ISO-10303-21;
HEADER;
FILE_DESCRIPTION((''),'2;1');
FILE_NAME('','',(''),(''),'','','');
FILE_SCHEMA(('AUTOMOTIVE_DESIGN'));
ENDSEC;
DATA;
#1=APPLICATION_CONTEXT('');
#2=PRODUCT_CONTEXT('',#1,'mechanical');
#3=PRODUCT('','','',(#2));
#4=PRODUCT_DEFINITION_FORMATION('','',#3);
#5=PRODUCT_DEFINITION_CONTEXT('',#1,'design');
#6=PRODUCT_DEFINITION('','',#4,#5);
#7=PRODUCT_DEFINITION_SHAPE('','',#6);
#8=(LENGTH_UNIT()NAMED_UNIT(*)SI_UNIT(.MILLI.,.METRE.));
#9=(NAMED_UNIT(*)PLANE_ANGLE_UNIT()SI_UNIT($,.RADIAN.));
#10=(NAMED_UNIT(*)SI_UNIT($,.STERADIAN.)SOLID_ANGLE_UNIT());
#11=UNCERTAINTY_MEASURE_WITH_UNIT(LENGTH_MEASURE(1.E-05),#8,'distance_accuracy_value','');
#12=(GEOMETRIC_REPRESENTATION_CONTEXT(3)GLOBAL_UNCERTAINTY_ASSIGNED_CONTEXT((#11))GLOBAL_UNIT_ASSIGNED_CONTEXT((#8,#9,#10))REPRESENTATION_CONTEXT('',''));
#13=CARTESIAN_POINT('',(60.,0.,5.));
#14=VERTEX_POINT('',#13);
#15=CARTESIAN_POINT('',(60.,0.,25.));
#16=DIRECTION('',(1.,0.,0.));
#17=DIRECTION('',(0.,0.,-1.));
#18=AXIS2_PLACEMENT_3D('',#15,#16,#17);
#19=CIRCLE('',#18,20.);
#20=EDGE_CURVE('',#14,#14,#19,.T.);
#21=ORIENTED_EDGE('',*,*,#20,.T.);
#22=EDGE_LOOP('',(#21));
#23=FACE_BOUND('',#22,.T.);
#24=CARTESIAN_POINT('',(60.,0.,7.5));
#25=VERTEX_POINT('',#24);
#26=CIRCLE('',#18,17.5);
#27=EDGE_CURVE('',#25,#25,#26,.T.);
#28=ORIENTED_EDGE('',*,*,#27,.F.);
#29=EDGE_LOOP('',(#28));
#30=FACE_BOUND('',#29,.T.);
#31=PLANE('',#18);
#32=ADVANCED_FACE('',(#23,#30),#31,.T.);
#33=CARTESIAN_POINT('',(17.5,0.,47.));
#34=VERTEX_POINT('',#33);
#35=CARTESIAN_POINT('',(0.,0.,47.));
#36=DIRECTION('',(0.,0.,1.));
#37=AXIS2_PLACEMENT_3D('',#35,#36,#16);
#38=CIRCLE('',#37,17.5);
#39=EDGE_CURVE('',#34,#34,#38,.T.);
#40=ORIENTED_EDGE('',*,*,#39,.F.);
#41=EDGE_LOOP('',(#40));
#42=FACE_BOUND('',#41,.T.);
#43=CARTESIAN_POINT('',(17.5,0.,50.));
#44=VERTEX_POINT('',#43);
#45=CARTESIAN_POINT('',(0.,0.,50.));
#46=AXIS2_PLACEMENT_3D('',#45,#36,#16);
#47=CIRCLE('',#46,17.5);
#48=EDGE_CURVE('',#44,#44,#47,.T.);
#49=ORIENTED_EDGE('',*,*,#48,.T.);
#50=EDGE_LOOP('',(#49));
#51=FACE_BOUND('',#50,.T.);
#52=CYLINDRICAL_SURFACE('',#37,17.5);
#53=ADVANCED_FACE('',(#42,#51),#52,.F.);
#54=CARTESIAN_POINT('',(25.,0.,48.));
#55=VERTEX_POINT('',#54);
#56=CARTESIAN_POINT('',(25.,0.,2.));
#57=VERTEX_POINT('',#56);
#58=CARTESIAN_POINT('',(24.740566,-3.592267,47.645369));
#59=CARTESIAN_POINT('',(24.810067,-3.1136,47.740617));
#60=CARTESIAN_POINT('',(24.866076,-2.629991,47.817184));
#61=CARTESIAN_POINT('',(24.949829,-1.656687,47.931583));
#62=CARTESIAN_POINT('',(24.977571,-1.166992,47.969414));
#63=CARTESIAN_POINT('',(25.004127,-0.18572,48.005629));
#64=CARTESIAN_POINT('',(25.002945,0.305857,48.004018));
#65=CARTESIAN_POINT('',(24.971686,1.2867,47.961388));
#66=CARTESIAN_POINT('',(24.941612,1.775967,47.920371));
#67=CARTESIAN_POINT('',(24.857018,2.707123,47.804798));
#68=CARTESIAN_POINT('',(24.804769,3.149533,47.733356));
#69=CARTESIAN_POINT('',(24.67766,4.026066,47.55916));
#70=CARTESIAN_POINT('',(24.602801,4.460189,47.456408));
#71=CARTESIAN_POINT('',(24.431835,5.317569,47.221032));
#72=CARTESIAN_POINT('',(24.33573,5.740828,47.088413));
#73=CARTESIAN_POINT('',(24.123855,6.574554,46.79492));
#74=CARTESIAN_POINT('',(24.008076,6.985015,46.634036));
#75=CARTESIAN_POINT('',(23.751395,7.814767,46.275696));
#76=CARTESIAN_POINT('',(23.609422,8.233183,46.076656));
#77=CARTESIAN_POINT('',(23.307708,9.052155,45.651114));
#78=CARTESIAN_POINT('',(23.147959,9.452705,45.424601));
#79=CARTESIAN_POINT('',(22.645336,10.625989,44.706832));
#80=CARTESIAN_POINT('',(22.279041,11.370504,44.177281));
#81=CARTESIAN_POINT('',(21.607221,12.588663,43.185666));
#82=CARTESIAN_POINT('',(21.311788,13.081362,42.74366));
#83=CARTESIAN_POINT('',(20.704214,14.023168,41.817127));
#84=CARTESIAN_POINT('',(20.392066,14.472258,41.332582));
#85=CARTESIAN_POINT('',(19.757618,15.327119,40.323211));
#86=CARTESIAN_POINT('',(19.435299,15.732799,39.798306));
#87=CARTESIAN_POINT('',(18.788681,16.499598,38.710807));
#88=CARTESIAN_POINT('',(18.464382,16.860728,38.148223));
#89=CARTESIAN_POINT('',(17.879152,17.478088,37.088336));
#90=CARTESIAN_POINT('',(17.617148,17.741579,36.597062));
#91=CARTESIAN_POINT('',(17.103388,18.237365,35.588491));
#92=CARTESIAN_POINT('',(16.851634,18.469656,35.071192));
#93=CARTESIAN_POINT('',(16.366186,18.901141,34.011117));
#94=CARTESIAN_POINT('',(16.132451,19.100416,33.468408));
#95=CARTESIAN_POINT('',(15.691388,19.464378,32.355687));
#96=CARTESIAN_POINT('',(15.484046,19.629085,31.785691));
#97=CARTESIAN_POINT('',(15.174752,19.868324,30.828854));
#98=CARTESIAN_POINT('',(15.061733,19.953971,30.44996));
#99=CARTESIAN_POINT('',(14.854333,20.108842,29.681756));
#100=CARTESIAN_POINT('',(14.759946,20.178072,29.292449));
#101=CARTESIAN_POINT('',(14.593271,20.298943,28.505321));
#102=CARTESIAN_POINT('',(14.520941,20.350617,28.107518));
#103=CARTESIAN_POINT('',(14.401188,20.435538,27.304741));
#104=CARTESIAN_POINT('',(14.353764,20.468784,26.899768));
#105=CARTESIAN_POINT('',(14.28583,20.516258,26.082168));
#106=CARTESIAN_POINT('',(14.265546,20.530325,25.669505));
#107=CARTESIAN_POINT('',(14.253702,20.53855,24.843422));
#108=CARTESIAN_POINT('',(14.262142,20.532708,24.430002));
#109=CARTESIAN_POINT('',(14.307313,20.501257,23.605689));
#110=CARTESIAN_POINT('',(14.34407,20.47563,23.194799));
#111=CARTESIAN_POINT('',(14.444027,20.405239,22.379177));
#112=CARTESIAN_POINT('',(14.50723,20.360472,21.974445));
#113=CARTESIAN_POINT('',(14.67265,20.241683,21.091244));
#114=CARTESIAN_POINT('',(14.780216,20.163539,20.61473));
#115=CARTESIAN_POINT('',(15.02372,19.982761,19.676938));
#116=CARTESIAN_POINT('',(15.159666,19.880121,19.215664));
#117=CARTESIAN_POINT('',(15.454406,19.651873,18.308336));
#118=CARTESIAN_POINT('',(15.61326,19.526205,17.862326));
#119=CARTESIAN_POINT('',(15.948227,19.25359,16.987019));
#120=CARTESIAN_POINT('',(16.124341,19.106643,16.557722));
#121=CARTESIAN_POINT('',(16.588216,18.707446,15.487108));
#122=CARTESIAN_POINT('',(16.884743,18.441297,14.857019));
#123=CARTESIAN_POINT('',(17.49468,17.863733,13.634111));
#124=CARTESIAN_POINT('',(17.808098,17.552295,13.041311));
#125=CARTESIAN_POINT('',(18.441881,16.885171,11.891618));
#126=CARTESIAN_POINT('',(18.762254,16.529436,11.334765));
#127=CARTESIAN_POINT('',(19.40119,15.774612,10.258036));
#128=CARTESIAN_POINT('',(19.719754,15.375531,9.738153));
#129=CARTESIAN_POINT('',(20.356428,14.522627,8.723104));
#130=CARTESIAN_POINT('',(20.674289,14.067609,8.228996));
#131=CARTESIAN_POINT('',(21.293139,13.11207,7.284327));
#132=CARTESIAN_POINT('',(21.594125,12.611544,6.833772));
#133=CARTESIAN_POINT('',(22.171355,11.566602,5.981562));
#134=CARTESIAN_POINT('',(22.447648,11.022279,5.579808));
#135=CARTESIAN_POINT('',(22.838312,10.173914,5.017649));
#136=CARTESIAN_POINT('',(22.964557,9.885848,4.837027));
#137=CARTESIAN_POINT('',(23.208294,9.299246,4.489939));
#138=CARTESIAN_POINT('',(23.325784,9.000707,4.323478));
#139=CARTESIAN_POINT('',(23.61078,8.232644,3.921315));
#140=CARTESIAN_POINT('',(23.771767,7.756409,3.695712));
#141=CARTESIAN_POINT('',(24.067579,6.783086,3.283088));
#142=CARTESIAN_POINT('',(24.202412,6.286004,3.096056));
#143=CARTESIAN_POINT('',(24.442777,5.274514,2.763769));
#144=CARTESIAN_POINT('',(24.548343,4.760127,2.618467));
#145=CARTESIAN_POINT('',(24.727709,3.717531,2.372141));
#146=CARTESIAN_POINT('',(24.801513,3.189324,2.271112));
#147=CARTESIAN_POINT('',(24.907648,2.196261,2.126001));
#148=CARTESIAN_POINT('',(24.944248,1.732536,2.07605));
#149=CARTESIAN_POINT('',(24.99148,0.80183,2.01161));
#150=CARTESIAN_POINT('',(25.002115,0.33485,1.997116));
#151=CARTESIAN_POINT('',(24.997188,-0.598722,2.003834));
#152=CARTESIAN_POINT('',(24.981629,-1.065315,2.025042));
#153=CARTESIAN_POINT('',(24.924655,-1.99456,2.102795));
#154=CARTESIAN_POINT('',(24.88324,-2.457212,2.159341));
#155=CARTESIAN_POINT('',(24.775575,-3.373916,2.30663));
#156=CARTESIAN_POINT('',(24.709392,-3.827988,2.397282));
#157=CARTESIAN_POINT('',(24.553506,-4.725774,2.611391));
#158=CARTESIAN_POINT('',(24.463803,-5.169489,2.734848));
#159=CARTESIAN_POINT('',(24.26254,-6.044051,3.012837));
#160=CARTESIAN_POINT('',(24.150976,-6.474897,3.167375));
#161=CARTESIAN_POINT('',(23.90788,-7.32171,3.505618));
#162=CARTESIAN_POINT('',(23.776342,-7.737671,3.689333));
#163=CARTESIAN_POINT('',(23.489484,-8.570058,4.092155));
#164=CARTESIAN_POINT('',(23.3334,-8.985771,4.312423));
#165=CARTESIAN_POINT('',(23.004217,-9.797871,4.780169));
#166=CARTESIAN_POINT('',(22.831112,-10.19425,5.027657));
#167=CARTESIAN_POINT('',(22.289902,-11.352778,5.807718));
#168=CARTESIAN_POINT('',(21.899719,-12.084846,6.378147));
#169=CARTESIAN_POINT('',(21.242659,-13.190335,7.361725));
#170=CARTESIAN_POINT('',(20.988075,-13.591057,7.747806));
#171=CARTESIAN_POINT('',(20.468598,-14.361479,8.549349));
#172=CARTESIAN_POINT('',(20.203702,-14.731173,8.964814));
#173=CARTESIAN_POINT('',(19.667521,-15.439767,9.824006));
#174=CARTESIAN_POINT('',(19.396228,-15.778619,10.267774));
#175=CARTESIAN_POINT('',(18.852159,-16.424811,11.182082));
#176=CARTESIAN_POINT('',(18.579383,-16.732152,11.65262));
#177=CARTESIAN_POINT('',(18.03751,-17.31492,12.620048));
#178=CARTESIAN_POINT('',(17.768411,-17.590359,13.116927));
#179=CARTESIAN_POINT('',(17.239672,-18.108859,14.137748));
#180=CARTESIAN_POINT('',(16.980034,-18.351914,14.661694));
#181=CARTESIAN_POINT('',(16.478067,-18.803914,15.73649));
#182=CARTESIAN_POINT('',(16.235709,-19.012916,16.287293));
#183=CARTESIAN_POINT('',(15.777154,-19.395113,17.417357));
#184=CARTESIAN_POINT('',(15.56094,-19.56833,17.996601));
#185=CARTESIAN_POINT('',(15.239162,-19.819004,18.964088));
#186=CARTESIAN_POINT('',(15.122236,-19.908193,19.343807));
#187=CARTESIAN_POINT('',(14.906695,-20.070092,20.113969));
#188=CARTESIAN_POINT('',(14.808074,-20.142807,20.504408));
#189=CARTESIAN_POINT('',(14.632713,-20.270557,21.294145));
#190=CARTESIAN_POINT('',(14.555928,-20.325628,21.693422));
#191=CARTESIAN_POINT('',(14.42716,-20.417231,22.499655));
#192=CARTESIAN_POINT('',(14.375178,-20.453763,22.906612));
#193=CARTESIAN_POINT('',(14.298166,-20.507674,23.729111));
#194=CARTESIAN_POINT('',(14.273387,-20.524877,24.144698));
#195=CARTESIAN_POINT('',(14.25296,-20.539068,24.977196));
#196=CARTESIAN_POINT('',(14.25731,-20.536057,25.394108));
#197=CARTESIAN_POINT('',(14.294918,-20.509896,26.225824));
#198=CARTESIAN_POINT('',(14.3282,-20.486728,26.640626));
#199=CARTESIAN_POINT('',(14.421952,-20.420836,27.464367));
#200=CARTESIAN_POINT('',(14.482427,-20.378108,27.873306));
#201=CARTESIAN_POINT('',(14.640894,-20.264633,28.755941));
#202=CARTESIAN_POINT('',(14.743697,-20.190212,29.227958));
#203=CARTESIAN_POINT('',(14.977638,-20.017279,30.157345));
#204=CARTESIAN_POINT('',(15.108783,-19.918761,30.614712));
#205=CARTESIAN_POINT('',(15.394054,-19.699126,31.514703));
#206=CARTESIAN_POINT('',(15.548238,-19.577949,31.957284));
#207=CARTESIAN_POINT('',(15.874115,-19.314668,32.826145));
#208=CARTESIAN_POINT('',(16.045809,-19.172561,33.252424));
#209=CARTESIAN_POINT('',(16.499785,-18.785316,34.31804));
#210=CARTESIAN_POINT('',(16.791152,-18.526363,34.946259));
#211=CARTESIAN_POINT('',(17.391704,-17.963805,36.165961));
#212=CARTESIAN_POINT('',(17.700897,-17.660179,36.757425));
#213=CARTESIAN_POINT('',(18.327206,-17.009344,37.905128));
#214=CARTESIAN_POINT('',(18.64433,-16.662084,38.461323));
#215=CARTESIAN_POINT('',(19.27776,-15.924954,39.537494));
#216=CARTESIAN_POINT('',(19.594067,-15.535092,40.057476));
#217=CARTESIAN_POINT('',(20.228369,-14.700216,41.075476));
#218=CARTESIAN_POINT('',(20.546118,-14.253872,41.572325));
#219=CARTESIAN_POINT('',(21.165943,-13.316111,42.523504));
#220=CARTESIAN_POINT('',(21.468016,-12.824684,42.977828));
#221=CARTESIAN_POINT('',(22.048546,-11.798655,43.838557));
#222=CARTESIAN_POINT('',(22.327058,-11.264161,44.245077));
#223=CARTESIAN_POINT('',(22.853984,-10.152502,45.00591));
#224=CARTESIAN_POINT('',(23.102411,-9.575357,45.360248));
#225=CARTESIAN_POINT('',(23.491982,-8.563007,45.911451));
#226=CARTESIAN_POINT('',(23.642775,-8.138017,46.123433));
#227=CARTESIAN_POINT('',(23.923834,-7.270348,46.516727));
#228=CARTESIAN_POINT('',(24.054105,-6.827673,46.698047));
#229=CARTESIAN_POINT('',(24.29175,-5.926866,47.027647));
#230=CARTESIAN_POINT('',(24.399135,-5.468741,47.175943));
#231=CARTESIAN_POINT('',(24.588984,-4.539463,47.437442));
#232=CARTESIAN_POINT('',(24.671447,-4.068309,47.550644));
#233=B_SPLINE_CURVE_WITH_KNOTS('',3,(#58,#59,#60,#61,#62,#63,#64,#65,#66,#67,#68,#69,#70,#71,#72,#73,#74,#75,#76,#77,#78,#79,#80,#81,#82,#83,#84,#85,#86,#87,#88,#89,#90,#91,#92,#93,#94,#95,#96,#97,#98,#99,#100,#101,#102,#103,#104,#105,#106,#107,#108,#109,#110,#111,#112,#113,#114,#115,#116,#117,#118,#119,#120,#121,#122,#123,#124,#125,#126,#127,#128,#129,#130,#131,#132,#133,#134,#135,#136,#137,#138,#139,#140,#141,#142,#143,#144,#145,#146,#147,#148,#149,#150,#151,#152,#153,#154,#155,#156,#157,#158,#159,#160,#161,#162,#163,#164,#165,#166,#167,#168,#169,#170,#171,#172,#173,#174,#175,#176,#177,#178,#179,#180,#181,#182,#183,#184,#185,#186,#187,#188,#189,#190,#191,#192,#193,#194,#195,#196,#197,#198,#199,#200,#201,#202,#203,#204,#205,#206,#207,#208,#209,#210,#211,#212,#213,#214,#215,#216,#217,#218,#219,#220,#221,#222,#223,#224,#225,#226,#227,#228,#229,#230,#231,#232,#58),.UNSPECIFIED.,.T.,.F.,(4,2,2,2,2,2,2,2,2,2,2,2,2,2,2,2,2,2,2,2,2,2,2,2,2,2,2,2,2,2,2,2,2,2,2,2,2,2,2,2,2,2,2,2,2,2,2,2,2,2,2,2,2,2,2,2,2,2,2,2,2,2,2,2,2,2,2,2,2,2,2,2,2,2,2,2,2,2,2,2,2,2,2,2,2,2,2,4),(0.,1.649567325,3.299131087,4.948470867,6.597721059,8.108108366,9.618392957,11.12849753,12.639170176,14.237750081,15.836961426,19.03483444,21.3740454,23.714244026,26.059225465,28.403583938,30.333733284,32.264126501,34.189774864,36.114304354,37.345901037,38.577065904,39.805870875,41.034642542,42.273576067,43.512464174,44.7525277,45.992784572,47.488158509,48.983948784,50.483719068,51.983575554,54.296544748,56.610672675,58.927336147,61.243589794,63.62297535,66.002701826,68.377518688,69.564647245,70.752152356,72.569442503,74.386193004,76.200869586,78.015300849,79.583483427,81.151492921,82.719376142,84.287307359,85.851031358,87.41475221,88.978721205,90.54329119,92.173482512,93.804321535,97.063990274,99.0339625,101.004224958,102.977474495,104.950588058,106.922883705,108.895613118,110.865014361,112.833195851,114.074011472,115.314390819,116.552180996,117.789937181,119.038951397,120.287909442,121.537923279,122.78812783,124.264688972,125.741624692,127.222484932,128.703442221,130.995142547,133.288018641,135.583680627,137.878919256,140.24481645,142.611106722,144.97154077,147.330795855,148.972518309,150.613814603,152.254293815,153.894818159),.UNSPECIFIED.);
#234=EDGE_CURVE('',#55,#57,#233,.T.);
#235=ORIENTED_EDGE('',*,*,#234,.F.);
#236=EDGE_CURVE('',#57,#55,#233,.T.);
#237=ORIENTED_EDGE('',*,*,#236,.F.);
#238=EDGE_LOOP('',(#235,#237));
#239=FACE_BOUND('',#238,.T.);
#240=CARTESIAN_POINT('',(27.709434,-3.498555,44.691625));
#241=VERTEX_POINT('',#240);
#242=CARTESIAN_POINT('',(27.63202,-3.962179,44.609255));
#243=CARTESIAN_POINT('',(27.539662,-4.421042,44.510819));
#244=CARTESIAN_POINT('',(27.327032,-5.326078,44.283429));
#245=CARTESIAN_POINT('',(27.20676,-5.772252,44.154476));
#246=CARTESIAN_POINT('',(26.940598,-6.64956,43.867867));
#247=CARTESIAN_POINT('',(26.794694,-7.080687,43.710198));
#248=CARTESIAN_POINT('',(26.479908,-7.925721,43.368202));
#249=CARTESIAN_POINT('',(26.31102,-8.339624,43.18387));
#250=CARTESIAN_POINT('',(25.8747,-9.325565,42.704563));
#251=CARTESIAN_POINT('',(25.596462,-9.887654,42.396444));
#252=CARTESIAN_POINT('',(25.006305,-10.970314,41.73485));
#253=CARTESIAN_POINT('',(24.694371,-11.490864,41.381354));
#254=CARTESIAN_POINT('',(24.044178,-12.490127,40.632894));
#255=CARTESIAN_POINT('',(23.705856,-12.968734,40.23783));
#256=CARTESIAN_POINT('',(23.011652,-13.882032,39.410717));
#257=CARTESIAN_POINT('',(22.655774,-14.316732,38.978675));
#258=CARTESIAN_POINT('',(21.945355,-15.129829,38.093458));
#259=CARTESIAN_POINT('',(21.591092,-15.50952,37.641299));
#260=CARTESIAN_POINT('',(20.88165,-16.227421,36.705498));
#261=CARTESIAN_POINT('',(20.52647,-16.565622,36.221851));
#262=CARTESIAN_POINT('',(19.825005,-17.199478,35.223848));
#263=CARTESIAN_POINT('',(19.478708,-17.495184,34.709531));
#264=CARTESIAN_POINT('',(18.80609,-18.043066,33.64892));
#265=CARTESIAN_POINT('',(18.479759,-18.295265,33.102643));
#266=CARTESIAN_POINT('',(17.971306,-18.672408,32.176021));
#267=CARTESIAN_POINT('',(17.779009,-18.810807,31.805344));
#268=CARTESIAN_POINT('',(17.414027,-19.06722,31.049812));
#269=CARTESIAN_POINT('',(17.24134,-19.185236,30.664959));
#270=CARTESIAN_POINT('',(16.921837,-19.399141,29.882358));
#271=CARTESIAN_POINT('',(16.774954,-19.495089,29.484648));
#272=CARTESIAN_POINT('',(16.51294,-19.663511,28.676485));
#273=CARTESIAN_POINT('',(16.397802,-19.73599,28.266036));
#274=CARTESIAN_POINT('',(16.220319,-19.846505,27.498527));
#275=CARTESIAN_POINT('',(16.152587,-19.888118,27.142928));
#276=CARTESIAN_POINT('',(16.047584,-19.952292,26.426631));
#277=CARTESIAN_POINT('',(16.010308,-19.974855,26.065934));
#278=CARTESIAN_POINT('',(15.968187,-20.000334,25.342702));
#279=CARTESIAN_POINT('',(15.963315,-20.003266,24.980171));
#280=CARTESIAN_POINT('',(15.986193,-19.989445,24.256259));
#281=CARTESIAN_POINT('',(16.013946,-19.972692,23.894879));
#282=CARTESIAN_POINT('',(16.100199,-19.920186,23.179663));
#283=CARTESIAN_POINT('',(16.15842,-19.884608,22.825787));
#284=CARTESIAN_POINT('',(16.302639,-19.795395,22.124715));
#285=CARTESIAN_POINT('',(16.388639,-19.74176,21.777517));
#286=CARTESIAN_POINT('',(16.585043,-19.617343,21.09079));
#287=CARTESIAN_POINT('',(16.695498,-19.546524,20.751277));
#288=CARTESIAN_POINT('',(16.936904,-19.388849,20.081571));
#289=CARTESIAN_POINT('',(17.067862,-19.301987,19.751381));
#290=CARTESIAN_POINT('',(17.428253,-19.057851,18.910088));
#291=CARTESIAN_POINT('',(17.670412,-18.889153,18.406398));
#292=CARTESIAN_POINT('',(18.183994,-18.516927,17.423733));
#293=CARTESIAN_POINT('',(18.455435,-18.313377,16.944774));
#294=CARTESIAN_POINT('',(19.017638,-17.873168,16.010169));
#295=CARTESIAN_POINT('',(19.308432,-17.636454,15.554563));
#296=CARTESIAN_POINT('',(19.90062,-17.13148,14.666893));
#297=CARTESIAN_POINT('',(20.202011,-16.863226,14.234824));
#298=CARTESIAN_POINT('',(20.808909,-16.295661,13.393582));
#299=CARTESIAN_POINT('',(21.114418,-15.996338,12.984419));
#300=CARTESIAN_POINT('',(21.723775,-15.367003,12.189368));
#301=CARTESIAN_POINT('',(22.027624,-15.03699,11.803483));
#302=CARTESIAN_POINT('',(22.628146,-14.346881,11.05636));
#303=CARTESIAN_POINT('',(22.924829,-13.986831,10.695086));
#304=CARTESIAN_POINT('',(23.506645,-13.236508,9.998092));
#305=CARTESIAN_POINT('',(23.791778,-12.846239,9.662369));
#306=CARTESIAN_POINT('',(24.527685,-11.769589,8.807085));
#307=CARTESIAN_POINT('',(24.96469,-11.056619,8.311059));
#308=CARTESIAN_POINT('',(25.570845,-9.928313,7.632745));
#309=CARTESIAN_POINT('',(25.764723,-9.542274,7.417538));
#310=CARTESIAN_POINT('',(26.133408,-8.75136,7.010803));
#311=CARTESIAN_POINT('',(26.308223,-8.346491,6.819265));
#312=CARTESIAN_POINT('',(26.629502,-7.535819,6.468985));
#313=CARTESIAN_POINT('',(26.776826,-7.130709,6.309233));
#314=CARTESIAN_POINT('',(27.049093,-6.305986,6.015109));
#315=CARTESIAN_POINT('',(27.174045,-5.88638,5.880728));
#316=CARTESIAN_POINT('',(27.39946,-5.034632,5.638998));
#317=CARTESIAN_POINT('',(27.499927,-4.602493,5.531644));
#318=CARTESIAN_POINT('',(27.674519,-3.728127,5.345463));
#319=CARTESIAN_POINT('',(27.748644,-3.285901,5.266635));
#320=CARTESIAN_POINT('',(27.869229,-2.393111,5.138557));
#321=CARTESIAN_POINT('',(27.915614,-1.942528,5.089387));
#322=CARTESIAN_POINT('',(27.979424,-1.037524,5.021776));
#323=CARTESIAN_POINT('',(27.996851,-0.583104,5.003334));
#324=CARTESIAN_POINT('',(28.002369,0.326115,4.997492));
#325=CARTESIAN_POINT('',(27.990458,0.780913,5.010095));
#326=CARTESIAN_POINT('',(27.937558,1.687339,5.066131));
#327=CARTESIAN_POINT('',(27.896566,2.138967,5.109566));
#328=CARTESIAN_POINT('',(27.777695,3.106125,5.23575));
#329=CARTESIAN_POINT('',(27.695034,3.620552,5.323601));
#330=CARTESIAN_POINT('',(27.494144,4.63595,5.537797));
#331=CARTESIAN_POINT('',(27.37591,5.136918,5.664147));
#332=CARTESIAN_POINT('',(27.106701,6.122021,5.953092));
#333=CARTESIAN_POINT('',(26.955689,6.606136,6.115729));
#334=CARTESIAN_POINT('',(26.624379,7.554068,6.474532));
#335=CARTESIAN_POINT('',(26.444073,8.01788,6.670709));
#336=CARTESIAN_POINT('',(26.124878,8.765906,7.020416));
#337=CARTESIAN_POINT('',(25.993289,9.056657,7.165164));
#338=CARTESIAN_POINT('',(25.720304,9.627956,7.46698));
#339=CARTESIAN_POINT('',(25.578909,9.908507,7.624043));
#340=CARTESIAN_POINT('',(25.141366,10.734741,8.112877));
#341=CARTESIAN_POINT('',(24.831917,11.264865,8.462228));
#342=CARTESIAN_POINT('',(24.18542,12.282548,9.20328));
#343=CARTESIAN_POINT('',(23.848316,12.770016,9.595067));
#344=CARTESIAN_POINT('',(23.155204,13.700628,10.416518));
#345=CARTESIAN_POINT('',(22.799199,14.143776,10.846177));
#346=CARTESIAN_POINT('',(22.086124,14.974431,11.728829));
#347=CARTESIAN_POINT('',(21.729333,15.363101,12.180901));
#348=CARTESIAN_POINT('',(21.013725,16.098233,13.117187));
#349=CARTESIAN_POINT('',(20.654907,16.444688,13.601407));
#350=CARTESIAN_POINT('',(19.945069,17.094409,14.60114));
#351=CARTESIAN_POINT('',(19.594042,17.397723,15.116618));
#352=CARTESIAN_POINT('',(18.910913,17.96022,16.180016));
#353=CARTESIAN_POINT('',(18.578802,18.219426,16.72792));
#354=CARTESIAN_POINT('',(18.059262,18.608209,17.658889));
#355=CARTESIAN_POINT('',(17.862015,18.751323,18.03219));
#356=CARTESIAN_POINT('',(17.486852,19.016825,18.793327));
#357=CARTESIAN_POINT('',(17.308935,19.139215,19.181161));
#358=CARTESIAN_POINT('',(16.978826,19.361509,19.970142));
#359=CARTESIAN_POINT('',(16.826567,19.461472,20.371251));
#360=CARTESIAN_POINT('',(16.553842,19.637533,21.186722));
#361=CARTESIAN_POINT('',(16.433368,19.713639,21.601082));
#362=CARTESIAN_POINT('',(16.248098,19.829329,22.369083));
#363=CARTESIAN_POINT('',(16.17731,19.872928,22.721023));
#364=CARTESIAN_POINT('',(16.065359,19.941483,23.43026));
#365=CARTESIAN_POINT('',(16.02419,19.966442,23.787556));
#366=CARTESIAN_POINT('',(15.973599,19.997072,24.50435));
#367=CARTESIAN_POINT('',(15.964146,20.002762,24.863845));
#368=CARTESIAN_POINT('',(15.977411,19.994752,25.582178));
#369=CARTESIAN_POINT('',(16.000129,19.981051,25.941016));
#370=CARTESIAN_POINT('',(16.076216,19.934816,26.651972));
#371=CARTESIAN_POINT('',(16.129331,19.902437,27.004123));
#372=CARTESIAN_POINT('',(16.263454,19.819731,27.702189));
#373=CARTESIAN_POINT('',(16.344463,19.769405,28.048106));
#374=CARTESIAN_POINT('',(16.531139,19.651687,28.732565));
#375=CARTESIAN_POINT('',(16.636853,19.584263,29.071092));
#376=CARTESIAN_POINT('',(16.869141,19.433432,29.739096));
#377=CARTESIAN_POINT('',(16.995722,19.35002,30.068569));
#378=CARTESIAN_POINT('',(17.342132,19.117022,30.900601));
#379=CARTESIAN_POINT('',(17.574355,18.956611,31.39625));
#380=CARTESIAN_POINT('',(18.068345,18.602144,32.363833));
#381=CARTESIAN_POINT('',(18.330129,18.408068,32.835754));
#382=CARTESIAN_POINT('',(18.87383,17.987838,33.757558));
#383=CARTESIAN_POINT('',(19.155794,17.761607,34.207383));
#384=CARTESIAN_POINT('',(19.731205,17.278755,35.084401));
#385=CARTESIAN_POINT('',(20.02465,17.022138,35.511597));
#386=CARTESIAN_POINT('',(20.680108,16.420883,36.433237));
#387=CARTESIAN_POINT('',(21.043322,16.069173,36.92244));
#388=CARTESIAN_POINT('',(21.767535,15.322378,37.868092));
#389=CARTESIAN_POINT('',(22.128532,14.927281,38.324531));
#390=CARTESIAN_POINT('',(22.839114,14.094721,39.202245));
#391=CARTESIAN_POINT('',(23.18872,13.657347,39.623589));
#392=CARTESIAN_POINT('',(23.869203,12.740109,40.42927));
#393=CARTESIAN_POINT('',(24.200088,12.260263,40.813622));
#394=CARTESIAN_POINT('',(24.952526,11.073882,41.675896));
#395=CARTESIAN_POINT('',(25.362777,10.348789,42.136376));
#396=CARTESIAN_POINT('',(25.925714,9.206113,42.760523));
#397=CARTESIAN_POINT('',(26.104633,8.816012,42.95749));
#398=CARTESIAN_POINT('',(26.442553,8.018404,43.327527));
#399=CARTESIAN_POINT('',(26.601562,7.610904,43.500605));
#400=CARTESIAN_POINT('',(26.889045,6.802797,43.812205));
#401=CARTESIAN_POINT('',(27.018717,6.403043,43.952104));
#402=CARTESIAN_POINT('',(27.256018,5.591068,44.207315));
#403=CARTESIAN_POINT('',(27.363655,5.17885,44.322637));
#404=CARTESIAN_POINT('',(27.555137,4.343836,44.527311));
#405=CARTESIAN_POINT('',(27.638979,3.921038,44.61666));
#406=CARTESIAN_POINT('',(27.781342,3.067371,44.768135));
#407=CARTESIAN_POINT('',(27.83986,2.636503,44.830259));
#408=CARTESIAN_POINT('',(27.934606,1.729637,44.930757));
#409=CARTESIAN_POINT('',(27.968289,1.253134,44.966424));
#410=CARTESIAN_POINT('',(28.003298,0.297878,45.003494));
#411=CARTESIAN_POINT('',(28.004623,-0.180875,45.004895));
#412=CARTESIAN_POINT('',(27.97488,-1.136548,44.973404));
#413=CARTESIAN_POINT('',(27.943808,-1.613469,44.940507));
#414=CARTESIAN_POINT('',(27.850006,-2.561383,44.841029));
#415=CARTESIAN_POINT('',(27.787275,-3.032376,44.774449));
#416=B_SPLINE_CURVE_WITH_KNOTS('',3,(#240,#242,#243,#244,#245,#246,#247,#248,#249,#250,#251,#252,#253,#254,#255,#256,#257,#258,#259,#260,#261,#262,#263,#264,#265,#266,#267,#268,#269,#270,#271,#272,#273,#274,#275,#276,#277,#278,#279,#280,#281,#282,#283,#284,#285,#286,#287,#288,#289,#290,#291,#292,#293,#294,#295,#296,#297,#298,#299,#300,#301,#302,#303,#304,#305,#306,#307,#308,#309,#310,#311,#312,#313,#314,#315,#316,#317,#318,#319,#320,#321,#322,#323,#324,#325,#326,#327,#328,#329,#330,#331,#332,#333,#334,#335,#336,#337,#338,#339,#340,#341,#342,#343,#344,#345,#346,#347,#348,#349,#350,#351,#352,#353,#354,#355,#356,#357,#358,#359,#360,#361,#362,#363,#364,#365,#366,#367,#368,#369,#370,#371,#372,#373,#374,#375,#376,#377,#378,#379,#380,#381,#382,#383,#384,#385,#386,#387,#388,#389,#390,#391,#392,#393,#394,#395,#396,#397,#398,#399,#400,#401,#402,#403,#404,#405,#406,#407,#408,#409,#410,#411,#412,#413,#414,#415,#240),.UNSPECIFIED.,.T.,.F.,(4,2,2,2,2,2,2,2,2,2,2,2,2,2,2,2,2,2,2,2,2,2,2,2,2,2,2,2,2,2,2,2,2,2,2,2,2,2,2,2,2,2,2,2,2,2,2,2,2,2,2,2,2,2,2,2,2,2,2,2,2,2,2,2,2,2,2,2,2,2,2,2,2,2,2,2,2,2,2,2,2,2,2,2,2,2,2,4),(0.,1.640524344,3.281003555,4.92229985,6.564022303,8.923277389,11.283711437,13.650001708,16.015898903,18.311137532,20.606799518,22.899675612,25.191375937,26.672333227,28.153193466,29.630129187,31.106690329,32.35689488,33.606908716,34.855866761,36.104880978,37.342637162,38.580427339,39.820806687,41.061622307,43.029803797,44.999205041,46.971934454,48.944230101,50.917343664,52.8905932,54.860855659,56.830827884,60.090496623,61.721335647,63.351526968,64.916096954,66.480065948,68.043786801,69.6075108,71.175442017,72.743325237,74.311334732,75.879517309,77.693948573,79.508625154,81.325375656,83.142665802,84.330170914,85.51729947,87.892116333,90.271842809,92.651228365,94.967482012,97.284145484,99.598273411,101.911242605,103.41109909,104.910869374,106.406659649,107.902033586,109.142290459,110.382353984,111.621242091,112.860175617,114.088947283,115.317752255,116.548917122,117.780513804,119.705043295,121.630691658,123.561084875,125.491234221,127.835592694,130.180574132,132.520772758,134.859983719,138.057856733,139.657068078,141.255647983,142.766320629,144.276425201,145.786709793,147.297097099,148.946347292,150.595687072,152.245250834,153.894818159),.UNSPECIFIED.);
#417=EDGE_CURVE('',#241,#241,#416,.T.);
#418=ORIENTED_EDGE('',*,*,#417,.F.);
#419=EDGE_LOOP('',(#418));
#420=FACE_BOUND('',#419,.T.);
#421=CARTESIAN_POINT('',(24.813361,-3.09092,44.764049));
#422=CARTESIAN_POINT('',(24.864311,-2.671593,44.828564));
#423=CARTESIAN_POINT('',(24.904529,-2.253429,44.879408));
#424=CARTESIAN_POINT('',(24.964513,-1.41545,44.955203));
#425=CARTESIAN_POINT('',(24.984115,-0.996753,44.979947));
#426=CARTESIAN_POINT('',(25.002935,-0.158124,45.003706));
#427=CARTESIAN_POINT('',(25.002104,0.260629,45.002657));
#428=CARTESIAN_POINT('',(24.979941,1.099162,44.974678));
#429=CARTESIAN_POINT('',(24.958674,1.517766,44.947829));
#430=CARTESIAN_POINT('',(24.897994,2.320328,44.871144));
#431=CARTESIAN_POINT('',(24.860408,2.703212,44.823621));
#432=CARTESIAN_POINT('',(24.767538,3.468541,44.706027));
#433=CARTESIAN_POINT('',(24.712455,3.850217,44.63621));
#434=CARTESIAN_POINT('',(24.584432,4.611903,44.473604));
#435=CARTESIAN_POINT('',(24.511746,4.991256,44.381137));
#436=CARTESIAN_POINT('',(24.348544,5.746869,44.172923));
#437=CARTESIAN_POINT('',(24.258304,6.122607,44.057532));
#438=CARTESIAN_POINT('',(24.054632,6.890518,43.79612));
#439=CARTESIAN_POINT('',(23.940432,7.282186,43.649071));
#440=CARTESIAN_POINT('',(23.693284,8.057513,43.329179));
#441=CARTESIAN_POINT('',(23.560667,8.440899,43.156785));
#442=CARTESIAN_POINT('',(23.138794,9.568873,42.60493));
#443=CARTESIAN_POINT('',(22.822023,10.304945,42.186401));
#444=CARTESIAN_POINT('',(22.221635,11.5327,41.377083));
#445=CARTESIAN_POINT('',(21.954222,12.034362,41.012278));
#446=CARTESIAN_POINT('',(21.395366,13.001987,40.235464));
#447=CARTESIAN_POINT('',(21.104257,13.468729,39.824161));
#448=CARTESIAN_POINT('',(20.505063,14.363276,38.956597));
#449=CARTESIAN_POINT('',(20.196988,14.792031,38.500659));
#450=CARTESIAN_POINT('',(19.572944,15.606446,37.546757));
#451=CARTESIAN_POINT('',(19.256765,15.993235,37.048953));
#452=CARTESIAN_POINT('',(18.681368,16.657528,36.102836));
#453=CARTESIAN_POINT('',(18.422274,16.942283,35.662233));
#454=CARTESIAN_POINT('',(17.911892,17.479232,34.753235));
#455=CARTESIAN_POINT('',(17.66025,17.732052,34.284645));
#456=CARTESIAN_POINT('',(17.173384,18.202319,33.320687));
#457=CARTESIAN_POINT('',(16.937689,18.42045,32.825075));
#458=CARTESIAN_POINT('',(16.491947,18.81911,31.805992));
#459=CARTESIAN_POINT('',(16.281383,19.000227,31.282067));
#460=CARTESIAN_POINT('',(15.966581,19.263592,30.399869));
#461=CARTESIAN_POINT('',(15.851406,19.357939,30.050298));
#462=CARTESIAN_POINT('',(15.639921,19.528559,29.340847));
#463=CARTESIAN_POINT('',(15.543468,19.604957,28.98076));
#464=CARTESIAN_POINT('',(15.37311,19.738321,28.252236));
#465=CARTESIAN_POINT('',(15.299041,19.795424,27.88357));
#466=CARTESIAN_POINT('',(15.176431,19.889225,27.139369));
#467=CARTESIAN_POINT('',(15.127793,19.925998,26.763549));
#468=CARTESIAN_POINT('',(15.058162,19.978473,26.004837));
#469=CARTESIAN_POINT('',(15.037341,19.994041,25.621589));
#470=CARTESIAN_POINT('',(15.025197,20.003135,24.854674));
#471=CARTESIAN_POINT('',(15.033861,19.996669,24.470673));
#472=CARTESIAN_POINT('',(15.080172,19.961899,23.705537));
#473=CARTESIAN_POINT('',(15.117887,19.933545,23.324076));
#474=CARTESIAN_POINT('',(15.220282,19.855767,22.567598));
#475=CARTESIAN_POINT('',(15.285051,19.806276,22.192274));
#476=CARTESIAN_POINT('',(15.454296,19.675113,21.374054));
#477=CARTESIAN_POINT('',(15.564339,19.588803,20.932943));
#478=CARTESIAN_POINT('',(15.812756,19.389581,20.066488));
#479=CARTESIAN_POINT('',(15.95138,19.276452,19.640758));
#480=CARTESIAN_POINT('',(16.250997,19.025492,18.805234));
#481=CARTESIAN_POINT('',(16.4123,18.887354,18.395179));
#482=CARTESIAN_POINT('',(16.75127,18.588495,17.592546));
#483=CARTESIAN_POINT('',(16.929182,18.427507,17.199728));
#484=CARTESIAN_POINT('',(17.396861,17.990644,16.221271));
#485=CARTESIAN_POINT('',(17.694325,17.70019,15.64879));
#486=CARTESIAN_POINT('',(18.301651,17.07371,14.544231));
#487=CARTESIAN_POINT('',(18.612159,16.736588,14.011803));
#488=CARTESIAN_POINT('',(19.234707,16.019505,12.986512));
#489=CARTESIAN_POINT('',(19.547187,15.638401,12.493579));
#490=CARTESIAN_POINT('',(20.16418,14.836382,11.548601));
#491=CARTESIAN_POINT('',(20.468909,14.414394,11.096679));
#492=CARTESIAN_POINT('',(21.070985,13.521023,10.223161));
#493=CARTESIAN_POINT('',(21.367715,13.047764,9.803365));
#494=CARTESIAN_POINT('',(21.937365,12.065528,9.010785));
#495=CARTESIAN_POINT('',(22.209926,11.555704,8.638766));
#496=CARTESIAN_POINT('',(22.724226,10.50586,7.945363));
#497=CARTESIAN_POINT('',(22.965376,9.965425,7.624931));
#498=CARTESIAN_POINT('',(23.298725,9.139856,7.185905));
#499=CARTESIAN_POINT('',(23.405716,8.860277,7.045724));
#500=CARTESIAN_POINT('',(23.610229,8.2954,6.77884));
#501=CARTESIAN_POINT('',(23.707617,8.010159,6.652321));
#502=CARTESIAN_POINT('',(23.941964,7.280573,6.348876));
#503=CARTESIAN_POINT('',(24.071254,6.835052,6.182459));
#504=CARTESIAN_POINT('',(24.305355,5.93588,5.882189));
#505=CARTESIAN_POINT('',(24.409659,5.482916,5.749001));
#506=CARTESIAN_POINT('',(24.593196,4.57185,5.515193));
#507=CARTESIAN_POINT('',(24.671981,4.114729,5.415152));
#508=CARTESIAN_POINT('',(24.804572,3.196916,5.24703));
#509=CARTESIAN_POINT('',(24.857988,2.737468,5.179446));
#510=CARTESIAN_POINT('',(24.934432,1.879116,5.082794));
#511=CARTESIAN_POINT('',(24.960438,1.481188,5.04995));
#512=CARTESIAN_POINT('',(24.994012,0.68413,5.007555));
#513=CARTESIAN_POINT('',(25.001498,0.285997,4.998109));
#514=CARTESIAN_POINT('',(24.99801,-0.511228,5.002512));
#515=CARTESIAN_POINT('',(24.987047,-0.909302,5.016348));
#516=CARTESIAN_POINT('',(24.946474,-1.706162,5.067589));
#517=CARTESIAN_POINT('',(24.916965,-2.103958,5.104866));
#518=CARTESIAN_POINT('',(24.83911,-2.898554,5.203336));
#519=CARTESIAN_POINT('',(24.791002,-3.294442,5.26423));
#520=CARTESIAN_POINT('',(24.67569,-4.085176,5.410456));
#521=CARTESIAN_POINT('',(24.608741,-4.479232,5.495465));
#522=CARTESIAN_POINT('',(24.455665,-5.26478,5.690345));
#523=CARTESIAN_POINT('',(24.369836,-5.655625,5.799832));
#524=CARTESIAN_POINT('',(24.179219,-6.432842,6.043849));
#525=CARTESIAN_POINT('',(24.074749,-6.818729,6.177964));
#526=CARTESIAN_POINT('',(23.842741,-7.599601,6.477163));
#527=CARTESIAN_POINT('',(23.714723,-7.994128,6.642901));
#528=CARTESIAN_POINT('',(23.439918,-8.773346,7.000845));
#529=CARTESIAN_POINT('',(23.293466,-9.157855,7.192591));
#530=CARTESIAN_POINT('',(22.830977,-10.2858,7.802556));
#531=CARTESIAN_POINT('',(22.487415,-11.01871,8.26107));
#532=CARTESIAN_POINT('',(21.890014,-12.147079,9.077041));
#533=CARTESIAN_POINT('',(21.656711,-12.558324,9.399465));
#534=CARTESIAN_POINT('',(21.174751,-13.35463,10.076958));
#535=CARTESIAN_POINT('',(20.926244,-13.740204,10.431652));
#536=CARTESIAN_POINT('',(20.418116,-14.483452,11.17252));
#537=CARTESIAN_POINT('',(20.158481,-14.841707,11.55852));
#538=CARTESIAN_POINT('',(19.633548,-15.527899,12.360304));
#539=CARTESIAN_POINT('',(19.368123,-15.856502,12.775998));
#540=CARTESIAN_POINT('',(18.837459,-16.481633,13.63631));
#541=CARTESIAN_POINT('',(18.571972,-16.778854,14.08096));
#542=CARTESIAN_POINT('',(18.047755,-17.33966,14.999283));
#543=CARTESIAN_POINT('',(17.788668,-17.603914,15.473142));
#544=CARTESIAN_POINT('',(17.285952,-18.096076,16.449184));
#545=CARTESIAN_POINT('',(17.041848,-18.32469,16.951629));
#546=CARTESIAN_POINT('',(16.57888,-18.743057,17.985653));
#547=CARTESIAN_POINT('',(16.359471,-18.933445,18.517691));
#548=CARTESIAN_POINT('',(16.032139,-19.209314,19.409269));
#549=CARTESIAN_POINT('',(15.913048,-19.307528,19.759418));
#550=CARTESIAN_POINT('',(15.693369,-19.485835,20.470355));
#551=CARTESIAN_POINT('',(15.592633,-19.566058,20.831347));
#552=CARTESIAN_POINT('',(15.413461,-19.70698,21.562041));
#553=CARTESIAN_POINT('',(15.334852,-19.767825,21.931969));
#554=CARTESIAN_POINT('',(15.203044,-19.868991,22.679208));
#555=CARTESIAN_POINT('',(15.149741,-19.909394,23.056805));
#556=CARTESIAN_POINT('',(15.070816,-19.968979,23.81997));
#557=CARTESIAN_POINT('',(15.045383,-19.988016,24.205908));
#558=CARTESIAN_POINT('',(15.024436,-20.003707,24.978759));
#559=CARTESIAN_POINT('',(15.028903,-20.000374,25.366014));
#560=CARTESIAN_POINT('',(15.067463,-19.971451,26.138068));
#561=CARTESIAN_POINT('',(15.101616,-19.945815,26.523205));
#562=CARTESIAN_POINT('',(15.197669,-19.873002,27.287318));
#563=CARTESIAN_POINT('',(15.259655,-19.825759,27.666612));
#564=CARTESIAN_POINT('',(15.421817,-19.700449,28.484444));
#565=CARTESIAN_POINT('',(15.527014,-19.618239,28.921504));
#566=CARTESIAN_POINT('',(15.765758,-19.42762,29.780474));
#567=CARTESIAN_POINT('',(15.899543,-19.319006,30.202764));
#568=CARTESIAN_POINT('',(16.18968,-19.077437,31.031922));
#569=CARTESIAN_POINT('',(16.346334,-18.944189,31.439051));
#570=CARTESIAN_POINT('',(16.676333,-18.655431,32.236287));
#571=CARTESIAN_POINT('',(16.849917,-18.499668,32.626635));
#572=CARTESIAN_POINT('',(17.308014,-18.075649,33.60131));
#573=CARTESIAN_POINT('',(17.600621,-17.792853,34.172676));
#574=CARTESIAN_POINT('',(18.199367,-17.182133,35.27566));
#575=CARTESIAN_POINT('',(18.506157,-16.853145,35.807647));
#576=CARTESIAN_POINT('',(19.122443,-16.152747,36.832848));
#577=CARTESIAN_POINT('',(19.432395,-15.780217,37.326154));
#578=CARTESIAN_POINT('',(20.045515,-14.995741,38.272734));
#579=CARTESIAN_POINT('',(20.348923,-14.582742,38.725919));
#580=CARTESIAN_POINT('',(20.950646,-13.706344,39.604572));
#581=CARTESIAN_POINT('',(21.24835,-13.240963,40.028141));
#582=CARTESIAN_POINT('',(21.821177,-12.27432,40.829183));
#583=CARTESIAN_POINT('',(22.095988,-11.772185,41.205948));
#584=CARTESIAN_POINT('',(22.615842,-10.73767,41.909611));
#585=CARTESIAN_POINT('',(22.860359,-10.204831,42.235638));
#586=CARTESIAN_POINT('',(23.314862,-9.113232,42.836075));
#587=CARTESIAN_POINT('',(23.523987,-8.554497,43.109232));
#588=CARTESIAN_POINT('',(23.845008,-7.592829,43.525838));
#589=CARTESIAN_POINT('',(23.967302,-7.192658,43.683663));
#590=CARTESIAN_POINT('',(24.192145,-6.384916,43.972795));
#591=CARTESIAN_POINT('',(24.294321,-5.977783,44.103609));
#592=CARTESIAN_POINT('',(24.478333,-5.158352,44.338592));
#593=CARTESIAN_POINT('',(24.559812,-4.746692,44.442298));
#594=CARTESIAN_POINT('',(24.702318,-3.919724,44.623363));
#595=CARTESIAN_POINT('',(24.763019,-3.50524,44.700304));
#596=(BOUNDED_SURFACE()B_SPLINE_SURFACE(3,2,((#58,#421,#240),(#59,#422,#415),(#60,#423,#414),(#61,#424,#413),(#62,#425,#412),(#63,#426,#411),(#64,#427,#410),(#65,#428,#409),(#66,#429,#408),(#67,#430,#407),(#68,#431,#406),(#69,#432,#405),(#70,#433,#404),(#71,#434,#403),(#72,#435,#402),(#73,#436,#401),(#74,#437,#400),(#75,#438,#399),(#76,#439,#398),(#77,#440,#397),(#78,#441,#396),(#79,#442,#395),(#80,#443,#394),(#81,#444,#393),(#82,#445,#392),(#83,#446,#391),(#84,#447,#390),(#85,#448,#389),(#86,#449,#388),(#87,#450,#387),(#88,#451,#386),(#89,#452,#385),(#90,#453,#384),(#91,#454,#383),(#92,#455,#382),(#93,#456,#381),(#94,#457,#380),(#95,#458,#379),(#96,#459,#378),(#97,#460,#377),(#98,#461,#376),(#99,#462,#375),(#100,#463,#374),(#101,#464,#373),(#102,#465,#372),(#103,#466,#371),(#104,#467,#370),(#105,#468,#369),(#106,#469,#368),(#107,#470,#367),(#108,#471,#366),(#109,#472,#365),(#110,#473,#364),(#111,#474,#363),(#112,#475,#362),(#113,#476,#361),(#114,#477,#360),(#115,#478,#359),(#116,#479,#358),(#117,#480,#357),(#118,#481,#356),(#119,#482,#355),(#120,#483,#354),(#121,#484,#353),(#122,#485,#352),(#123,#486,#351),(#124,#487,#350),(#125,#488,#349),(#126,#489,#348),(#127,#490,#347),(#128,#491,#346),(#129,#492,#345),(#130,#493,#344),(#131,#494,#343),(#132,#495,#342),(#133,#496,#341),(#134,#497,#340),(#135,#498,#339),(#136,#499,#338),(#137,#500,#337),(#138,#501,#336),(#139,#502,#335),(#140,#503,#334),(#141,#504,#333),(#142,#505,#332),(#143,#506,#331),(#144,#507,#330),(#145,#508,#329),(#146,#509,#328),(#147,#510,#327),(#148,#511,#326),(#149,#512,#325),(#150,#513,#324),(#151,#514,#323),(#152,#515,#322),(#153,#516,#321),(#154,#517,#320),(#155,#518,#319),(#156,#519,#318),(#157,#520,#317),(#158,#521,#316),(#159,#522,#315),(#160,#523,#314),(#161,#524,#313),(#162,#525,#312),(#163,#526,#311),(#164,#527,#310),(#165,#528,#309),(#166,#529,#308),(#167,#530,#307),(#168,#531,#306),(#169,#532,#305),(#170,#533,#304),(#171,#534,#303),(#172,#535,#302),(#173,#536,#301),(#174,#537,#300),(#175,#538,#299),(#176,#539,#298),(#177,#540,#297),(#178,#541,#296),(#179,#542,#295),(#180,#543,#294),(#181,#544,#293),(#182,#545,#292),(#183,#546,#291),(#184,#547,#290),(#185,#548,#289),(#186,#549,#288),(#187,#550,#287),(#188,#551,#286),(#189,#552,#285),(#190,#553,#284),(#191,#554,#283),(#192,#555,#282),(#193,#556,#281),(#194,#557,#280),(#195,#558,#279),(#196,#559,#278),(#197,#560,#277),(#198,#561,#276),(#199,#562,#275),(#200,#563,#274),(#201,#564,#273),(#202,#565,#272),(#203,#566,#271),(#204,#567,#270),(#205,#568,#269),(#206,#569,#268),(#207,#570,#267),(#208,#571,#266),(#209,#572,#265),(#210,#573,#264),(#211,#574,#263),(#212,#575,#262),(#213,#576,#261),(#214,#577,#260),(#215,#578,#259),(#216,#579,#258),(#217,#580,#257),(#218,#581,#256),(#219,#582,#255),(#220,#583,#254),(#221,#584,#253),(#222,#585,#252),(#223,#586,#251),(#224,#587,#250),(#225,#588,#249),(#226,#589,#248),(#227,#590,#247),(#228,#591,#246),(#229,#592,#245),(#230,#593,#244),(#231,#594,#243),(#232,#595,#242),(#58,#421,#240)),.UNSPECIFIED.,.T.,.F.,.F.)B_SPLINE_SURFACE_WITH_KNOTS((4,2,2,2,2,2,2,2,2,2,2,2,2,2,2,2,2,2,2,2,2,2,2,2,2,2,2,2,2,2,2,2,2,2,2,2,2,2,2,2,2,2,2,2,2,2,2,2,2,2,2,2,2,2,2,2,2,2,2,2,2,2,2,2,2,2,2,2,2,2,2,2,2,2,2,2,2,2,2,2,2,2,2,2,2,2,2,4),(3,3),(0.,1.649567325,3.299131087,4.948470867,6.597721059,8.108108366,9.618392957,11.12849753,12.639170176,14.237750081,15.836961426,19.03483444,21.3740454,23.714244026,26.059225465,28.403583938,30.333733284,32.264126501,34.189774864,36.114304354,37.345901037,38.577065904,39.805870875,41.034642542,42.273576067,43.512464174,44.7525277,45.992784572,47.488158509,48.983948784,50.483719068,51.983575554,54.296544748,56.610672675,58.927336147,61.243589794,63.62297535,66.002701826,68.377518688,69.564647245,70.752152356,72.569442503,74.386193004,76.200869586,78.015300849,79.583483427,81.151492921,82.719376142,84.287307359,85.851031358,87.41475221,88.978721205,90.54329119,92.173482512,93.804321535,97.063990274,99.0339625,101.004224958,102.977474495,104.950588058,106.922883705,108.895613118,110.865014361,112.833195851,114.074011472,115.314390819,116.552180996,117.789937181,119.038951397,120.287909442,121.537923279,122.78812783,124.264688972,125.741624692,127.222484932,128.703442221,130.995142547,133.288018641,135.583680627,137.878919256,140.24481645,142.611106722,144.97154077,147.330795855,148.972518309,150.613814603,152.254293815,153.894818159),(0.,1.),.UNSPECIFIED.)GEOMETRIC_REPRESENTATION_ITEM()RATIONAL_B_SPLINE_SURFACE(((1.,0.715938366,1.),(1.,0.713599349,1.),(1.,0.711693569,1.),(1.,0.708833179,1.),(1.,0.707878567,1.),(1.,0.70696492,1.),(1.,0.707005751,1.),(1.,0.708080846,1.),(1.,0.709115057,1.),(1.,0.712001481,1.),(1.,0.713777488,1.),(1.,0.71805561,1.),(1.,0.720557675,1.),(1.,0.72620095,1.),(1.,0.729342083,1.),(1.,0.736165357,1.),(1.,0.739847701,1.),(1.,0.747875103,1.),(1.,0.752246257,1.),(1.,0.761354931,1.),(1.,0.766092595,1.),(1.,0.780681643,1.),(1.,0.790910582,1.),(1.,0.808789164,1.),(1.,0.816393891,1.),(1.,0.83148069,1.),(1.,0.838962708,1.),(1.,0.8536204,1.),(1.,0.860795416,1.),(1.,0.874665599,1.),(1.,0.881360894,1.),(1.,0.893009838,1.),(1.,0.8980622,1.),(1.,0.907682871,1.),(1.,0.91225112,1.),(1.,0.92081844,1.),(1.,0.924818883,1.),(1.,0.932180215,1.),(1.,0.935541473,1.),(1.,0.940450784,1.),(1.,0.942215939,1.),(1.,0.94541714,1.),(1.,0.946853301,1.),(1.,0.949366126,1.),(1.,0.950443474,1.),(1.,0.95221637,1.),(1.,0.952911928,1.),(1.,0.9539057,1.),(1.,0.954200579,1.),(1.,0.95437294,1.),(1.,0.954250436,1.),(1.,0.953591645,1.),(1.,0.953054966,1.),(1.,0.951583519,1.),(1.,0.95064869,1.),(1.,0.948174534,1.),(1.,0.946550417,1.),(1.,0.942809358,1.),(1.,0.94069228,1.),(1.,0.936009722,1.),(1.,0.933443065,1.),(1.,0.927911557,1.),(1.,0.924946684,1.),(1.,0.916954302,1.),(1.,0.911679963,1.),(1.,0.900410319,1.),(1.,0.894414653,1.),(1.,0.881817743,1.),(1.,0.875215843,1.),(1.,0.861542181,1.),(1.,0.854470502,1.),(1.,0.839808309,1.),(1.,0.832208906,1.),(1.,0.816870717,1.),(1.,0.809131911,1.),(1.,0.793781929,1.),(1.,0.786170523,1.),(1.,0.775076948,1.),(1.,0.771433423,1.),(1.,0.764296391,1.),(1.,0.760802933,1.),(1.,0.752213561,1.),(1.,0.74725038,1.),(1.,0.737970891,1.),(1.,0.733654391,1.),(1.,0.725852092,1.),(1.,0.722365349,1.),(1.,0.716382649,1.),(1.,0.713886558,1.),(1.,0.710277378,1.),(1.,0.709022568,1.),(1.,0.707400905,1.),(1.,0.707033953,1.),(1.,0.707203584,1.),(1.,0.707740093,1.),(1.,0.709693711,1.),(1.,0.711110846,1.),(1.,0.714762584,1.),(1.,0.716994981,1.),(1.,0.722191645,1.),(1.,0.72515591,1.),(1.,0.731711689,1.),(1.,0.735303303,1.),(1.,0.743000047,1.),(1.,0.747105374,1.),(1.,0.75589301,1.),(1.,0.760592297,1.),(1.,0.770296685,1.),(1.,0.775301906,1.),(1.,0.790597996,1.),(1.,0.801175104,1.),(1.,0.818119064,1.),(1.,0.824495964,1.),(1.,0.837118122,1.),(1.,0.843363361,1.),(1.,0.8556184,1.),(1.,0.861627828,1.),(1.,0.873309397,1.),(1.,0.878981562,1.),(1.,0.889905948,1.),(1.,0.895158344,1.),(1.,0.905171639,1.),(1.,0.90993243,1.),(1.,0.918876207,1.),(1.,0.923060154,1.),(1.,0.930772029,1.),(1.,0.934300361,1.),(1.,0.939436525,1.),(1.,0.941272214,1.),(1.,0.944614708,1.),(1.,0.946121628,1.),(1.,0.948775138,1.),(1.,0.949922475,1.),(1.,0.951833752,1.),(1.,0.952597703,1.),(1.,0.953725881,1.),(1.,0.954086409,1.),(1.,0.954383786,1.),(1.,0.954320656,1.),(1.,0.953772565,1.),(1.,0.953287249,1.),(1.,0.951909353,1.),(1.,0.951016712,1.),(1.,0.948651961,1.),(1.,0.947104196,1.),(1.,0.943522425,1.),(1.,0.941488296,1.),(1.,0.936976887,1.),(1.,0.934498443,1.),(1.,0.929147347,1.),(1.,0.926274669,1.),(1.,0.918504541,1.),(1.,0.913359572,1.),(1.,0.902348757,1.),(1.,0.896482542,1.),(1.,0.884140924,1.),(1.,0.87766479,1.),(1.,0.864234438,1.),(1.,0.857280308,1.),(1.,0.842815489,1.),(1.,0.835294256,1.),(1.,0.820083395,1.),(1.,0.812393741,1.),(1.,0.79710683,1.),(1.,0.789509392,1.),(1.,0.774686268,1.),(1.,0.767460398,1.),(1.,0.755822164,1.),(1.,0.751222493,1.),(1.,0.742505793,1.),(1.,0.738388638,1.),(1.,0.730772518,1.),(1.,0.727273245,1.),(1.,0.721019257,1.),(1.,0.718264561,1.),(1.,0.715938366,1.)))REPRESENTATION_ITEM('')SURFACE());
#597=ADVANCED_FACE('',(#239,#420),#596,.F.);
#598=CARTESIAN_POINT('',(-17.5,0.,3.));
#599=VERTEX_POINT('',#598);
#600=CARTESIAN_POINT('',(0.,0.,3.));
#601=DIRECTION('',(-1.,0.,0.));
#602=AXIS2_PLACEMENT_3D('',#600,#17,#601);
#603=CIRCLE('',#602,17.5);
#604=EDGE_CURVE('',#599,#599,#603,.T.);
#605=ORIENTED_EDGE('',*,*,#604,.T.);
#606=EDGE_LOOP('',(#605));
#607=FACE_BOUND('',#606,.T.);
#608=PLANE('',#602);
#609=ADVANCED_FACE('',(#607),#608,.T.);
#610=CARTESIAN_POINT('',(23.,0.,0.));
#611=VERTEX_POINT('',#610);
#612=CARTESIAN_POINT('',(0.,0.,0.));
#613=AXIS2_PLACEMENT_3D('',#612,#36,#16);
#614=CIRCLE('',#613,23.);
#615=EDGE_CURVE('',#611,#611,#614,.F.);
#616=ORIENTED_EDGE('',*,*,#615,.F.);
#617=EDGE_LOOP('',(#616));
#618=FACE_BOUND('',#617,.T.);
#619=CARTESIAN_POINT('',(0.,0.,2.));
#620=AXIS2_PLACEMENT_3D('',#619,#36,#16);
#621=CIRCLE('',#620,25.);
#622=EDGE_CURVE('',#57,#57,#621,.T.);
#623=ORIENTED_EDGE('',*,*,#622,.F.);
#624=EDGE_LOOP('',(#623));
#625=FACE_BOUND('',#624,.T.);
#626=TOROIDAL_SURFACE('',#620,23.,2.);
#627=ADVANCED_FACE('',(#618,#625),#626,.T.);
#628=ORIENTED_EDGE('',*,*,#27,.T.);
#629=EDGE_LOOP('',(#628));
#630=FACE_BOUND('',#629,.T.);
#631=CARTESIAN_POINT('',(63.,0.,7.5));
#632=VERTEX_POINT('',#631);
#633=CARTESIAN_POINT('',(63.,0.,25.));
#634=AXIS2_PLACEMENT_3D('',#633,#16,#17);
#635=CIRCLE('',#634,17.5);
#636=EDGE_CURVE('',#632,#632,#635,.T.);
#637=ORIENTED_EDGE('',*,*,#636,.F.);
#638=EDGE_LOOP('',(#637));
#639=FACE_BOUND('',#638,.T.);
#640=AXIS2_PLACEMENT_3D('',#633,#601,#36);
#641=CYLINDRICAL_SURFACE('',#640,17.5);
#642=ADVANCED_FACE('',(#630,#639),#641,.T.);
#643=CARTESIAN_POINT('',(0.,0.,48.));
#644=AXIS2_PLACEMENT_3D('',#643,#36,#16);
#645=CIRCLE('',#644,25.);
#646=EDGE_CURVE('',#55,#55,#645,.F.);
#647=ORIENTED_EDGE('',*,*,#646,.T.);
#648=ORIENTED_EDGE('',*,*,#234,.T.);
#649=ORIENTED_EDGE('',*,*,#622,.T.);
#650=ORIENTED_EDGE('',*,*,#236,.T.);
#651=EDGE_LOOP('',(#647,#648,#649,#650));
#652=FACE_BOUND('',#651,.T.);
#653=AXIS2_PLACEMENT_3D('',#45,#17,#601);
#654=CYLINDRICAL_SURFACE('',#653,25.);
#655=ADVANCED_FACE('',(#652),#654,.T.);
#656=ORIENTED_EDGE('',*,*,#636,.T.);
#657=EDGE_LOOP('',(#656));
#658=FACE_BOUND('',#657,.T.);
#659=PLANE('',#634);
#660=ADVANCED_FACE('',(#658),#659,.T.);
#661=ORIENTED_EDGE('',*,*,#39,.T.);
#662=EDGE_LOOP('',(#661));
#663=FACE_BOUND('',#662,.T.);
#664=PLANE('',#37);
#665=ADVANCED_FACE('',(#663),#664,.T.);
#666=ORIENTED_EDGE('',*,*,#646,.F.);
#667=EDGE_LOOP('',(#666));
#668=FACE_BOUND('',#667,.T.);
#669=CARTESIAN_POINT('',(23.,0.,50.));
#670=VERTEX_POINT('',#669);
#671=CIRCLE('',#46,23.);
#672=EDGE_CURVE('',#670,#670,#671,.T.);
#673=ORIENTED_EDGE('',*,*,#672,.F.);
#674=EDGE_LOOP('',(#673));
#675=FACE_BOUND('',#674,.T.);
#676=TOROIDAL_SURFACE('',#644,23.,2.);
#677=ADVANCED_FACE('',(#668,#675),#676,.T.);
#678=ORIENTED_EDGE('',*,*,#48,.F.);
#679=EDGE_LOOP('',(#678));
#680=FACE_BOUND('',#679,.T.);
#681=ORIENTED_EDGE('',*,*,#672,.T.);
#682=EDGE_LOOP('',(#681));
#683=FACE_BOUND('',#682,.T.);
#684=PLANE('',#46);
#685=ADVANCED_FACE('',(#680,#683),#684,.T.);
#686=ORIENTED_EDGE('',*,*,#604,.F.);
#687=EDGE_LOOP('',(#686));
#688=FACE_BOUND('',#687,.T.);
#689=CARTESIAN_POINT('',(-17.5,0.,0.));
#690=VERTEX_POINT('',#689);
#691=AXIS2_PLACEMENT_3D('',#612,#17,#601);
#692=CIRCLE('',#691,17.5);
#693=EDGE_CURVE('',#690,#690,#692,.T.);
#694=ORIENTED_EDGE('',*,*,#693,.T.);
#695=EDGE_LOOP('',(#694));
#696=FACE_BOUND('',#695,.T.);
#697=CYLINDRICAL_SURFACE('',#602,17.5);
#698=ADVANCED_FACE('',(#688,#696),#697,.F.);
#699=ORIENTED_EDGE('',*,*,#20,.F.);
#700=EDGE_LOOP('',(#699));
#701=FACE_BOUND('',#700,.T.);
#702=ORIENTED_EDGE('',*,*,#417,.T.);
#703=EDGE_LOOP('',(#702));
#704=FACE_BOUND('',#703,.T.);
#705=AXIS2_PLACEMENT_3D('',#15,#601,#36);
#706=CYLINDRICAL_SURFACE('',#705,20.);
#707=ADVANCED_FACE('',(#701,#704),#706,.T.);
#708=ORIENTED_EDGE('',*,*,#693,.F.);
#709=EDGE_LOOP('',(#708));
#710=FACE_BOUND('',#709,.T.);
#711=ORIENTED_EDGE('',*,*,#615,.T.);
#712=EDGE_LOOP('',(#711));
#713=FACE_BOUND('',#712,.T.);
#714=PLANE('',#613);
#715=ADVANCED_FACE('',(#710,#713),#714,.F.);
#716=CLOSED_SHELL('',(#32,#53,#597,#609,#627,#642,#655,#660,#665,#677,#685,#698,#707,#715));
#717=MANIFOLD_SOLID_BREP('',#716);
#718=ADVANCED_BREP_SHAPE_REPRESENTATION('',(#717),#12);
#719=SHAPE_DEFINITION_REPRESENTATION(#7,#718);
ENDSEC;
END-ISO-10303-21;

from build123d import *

# Parameters (mm, degrees)
SKETCH1_R           = 25
BOSS_EXTRUDE1_DEPTH = 50
SKETCH2_R           = 17.5
CUT_EXTRUDE1_DEPTH  = 3
CUT_EXTRUDE2_START  = -3
SKETCH3_R           = 17.5
CUT_EXTRUDE2_DEPTH  = 3
SKETCH4_R           = 20
BOSS_EXTRUDE2_DEPTH = 60
SKETCH5_R           = 17.5
BOSS_EXTRUDE3_DEPTH = 3
FILLET1_R           = 3
FILLET2_R           = 2


with BuildPart() as part:
    # Sketch1 → Boss-Extrude1 (new body)
    with BuildSketch(Plane.XY):
        Circle(SKETCH1_R)
    extrude(amount=BOSS_EXTRUDE1_DEPTH)

    # Sketch2 → Cut-Extrude1 (cut)
    with BuildSketch(Plane.XY.offset(50)):
        Circle(SKETCH2_R)
    extrude(amount=-CUT_EXTRUDE1_DEPTH, mode=Mode.SUBTRACT)

    # Sketch3 → Cut-Extrude2 (cut)
    with BuildSketch(Plane(origin=(0, 0, 0), x_dir=(-1, 0, 0), z_dir=(0, 0, -1)).offset(CUT_EXTRUDE2_START)):
        with Locations(Location((0, 0, 0), (0, 0, 180))):
            Circle(SKETCH3_R)
    extrude(amount=CUT_EXTRUDE2_DEPTH, mode=Mode.SUBTRACT)

    # Sketch4 → Boss-Extrude2 (add)
    with BuildSketch(Plane(origin=(0, 0, 0), x_dir=(0, 0, -1), z_dir=(1, 0, 0))):
        with Locations((-25, 0)):
            Circle(SKETCH4_R)
    extrude(amount=BOSS_EXTRUDE2_DEPTH)

    # Sketch5 → Boss-Extrude3 (add)
    with BuildSketch(Plane(origin=(60, 0, 0), x_dir=(0, 0, -1), z_dir=(1, 0, 0))):
        with Locations((-25, 0)):
            Circle(SKETCH5_R)
    extrude(amount=BOSS_EXTRUDE3_DEPTH)

    # Fillet1
    fillet1_edges = [part.edges().sort_by_distance(p)[0] for p in [
        (15, 20, 25),
    ]]
    fillet(fillet1_edges, radius=FILLET1_R)

    # Fillet2
    fillet2_edges = [part.edges().sort_by_distance(p)[0] for p in [
        (-25, 0, 0),
        (-25, 0, 50),
    ]]
    fillet(fillet2_edges, radius=FILLET2_R - 0.0001)  # a hair under: the kernel refuses the full size


solid = part.part
